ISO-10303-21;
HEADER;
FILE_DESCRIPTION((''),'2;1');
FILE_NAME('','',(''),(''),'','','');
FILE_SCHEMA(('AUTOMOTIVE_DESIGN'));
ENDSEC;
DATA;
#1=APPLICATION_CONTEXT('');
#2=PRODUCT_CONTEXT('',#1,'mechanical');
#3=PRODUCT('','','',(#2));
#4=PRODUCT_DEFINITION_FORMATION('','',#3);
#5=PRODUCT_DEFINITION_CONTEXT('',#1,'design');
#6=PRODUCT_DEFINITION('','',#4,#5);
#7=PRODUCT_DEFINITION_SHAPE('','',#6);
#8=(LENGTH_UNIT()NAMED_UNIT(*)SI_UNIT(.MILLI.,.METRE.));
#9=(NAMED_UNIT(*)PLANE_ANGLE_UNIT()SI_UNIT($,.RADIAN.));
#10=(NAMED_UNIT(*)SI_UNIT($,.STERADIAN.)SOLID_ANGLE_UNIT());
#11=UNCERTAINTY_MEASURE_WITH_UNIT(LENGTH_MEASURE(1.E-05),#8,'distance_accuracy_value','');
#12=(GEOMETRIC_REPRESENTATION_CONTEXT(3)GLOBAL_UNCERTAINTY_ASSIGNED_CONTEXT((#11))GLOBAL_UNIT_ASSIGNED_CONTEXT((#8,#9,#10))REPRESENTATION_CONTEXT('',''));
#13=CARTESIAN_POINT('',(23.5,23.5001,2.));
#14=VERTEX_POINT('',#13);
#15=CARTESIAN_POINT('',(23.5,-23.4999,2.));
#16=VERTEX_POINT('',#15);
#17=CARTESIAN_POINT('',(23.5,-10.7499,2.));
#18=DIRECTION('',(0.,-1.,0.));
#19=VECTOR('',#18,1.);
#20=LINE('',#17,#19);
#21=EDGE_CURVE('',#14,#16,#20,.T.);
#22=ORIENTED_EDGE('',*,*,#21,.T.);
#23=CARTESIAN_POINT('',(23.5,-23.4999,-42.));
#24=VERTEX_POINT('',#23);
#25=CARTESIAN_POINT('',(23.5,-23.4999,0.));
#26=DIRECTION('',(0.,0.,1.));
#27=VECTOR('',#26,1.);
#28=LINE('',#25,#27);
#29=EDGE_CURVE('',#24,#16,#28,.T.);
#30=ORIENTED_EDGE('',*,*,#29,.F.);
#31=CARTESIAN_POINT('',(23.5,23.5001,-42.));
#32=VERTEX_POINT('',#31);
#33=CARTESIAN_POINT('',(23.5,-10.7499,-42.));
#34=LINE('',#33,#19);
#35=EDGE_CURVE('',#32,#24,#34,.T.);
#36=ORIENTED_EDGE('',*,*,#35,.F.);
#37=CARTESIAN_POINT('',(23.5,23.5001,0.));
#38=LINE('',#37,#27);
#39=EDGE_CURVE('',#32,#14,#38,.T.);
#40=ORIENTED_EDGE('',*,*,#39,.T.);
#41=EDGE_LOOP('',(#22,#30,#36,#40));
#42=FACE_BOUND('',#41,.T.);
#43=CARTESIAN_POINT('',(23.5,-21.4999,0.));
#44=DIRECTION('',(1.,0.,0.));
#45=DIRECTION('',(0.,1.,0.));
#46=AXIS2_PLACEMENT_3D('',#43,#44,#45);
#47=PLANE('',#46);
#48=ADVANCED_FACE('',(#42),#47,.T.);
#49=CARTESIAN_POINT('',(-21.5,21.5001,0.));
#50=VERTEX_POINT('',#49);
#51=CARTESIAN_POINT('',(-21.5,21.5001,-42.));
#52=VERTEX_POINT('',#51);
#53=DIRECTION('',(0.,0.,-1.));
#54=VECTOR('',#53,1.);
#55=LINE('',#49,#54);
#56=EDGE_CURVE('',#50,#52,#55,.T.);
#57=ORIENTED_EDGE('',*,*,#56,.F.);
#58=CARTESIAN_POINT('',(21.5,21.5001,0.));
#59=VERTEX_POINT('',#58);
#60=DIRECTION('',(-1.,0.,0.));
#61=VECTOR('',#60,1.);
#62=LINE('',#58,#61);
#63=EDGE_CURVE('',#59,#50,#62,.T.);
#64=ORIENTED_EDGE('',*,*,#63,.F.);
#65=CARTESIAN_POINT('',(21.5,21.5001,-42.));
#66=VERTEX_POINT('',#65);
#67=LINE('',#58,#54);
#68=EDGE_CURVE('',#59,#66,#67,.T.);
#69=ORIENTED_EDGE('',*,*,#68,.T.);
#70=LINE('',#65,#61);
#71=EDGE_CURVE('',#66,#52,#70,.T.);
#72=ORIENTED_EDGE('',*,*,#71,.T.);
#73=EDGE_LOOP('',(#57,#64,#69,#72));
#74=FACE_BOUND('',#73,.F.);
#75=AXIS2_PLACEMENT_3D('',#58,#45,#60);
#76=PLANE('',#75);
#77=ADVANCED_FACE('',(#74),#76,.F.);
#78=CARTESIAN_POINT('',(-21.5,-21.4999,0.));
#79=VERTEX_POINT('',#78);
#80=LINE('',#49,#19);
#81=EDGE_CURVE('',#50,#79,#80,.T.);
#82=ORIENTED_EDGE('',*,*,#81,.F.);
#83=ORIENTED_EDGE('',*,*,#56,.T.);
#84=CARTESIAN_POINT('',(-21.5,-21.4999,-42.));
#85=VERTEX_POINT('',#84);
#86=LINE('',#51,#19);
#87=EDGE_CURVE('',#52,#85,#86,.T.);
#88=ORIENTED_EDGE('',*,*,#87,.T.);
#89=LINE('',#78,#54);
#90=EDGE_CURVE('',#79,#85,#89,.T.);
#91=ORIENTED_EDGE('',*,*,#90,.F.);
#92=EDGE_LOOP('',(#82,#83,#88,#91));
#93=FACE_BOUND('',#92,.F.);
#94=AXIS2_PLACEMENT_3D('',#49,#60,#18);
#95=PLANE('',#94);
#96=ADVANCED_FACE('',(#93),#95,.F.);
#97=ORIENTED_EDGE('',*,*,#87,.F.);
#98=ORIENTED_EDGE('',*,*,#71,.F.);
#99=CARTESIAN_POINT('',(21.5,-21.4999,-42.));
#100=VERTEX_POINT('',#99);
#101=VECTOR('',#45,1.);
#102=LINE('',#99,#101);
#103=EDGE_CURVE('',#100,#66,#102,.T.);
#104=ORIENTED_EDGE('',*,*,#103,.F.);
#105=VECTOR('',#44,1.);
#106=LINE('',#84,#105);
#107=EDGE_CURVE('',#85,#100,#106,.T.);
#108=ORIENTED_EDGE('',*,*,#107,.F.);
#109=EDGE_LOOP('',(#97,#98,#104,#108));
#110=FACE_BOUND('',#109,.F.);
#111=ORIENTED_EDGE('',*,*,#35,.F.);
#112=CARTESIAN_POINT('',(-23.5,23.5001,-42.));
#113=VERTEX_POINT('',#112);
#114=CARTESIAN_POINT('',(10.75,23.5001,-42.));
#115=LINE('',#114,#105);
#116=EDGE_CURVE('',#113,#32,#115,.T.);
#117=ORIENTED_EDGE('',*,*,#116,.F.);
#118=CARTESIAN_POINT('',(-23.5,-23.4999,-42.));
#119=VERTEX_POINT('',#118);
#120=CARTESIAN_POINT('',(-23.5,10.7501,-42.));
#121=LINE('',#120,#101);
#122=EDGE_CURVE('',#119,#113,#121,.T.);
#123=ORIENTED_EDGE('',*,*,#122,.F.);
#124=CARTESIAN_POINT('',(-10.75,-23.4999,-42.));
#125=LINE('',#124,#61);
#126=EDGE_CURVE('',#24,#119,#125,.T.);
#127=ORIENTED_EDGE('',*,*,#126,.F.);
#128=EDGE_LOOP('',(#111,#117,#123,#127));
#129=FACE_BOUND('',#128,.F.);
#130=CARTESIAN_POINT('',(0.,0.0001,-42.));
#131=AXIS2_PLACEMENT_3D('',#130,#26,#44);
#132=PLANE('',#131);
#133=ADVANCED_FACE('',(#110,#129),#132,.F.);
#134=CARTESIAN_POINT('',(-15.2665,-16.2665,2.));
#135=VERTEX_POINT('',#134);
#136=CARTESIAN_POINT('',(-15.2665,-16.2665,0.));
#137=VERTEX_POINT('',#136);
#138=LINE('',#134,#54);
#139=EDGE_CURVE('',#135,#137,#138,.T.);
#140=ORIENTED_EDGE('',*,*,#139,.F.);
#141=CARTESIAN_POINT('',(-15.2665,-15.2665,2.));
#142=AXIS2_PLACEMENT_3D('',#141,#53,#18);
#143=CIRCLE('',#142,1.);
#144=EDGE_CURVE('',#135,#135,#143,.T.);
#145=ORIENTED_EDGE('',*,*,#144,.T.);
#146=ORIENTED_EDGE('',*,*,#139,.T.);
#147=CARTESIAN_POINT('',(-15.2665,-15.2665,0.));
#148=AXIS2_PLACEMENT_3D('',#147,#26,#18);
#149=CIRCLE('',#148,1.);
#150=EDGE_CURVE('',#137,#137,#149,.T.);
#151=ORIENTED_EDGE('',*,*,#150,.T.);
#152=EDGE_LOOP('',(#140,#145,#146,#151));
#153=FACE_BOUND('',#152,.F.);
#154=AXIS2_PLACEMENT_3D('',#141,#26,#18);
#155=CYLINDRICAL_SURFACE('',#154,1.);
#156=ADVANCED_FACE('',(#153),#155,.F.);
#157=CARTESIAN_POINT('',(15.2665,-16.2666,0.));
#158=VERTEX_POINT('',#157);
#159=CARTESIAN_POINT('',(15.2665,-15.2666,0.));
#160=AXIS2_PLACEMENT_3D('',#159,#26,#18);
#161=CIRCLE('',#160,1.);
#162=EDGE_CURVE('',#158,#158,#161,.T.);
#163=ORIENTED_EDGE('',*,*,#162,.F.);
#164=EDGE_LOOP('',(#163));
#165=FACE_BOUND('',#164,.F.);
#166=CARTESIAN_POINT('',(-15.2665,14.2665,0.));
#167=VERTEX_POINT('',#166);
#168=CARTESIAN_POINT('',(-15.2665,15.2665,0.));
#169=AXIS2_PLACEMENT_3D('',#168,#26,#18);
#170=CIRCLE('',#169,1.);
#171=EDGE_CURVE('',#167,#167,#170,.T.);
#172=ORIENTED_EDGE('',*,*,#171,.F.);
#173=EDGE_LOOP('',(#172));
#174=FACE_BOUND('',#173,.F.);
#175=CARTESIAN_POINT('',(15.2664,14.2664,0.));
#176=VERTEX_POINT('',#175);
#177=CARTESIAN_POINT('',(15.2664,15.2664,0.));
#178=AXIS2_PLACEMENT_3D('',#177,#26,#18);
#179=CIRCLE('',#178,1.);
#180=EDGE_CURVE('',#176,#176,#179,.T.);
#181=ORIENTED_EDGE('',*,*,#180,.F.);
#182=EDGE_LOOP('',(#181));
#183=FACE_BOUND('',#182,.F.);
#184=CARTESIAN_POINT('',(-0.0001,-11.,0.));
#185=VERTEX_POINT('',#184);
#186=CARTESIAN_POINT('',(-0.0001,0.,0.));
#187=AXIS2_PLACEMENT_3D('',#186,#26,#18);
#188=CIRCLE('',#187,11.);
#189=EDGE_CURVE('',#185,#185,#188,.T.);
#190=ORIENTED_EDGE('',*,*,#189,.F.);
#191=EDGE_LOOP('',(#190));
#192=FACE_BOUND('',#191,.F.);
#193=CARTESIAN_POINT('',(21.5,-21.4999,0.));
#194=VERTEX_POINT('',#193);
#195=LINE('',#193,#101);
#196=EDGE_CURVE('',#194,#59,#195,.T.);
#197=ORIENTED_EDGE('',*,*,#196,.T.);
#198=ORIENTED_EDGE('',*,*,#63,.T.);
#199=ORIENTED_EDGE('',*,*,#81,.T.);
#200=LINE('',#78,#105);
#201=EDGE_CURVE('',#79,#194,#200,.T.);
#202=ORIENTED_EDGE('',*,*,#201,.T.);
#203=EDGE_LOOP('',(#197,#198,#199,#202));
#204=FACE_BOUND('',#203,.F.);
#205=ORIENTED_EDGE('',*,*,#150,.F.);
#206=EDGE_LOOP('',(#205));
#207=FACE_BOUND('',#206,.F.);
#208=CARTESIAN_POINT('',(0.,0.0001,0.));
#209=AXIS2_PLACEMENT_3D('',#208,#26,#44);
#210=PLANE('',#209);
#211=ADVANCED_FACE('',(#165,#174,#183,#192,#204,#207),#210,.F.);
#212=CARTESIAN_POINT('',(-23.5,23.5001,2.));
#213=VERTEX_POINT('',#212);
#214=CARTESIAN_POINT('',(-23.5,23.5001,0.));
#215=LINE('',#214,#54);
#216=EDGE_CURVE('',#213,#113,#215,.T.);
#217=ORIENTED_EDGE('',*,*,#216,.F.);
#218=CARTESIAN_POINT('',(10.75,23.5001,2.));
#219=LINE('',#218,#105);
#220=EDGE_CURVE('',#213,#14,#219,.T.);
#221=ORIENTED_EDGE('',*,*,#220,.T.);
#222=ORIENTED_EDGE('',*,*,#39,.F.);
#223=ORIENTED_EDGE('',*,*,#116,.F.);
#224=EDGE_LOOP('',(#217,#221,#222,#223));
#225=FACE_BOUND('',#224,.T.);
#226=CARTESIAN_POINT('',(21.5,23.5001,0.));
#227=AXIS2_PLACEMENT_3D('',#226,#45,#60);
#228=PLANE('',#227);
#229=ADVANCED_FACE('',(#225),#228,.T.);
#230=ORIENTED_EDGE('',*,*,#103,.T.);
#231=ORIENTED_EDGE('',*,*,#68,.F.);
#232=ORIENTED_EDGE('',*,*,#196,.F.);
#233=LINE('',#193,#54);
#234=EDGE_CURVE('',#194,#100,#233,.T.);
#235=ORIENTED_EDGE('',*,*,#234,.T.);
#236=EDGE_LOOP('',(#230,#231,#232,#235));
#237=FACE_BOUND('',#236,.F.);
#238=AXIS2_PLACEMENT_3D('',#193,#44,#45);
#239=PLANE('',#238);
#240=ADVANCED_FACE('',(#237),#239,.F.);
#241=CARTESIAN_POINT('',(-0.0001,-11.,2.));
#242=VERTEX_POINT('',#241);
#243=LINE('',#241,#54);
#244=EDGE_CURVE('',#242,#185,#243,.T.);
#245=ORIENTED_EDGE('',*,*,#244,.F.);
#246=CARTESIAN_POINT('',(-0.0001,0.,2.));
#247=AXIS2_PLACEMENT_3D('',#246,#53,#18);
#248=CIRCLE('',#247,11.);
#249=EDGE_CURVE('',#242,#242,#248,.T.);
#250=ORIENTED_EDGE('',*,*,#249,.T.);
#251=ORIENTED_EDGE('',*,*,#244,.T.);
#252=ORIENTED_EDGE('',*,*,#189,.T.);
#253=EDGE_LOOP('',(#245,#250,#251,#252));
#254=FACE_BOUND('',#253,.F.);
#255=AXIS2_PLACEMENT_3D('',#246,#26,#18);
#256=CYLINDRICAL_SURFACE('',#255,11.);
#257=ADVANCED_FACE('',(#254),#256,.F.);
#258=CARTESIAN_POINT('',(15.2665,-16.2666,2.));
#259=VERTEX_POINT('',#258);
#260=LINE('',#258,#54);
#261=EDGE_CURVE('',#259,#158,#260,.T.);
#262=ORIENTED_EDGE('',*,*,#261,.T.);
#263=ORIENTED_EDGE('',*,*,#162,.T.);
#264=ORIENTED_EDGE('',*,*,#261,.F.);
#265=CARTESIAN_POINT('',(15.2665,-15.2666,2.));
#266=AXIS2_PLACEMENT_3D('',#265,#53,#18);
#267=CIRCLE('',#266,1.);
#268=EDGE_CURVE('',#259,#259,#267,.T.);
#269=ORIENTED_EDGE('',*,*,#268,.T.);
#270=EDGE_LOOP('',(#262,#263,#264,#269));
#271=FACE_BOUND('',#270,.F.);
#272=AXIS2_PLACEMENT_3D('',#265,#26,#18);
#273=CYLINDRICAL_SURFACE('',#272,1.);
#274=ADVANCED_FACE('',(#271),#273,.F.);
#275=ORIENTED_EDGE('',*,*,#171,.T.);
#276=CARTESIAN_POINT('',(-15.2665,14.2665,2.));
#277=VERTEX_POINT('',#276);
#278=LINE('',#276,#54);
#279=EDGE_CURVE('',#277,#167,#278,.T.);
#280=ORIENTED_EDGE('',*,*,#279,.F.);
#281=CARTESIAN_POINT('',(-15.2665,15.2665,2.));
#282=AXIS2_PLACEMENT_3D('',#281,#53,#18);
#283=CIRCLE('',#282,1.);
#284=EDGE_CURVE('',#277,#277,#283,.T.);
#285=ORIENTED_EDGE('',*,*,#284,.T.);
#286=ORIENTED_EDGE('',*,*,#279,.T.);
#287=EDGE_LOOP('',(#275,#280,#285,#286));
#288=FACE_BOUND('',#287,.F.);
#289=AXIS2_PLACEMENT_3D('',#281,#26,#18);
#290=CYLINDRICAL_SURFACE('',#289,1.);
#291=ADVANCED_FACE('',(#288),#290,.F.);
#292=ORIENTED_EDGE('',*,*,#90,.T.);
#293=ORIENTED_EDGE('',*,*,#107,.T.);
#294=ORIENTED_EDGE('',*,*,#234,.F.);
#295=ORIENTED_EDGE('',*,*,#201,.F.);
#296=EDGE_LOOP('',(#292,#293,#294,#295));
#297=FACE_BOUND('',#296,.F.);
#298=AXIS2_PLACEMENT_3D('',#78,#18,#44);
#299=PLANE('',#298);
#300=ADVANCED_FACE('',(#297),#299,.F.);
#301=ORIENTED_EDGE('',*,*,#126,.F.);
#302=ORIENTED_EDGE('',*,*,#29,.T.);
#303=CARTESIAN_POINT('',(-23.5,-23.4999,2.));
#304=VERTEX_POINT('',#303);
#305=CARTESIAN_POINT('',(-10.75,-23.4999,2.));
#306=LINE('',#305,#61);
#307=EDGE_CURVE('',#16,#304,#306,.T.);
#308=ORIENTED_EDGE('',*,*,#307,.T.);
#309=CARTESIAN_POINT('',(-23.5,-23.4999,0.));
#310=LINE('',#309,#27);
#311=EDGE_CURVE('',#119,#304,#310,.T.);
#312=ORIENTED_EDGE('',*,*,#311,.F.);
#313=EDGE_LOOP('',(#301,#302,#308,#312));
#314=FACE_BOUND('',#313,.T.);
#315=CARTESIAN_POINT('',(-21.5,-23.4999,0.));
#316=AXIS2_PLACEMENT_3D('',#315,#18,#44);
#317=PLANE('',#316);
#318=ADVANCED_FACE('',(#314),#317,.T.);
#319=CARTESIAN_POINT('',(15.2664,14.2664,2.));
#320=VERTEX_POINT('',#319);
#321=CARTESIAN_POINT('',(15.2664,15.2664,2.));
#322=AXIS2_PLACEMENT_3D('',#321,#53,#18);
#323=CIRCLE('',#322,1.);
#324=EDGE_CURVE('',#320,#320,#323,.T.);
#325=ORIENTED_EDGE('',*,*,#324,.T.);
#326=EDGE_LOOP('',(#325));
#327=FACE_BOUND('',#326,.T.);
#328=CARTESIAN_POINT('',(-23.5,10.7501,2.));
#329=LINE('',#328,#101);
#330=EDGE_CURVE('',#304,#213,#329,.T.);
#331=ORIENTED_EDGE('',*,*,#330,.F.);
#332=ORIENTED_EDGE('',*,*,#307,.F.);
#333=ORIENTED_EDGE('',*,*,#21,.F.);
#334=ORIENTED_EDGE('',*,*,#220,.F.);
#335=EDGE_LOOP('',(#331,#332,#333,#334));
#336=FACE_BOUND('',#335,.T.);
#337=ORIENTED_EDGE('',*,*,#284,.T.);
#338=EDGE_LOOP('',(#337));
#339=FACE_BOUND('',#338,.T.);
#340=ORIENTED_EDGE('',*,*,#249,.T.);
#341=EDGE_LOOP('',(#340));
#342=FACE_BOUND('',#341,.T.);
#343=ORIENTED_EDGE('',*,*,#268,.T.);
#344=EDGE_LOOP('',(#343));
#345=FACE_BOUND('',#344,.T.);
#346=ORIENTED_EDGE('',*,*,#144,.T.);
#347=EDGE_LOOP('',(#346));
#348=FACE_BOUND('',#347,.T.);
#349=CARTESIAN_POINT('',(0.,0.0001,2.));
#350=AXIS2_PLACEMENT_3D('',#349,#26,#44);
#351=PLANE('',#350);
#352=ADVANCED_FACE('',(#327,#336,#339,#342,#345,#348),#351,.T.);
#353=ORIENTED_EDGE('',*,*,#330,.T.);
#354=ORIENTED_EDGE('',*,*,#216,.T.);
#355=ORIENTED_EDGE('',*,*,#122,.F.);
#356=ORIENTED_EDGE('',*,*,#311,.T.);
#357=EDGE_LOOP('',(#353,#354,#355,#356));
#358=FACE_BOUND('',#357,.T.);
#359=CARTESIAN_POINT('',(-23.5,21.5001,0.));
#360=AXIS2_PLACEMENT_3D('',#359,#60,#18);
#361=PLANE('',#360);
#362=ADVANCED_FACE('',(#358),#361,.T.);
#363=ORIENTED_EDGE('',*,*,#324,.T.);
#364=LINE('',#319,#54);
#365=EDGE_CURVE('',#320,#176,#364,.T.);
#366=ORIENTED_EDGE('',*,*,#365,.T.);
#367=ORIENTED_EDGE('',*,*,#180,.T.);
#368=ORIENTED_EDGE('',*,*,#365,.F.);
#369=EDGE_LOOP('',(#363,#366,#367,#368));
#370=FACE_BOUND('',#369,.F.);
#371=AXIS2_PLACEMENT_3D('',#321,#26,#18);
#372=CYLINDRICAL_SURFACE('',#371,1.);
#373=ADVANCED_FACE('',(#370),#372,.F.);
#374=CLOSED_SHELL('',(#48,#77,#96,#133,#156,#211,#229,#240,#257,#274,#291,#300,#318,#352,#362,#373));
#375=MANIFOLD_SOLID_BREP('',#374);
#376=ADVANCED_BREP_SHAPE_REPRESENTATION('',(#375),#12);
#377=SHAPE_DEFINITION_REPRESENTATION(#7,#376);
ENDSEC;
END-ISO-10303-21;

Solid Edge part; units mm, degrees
sketch "Sketch1" plane through (0, 0, 0) normal (0, 0, 1) x (1, 0, 0)
  line L0 (-21.5, 21.5001) -> (-21.5, -21.4999)
  line L1 (-21.5, -21.4999) -> (21.5, -21.4999)
  line L2 (21.5, -21.4999) -> (21.5, 21.5001)
  line L3 (21.5, 21.5001) -> (-21.5, 21.5001)
extrude "Protrusion1" add sketch "Sketch1" against normal blind 42
shell "Thinwall_1" thickness 0 removed faces 1 at (-14.7633, -13.9032, -42) outside thickness 2
hole "Hole_1" at (15.2665, -15.2666, 2) direction (0, 0, -1) diameter 2 end up to next
hole "Hole1" at (-15.2665, -15.2665, 2) direction (0, 0, -1) diameter 2 end up to next
hole "Hole2" at (-15.2665, 15.2665, 2) direction (0, 0, -1) diameter 2 end up to next
hole "Hole3" at (15.2664, 15.2664, 2) direction (0, 0, -1) diameter 2 end up to next
hole "Hole_6" at (-0.0001, 0, 2) direction (0, 0, -1) diameter 22 end up to next
